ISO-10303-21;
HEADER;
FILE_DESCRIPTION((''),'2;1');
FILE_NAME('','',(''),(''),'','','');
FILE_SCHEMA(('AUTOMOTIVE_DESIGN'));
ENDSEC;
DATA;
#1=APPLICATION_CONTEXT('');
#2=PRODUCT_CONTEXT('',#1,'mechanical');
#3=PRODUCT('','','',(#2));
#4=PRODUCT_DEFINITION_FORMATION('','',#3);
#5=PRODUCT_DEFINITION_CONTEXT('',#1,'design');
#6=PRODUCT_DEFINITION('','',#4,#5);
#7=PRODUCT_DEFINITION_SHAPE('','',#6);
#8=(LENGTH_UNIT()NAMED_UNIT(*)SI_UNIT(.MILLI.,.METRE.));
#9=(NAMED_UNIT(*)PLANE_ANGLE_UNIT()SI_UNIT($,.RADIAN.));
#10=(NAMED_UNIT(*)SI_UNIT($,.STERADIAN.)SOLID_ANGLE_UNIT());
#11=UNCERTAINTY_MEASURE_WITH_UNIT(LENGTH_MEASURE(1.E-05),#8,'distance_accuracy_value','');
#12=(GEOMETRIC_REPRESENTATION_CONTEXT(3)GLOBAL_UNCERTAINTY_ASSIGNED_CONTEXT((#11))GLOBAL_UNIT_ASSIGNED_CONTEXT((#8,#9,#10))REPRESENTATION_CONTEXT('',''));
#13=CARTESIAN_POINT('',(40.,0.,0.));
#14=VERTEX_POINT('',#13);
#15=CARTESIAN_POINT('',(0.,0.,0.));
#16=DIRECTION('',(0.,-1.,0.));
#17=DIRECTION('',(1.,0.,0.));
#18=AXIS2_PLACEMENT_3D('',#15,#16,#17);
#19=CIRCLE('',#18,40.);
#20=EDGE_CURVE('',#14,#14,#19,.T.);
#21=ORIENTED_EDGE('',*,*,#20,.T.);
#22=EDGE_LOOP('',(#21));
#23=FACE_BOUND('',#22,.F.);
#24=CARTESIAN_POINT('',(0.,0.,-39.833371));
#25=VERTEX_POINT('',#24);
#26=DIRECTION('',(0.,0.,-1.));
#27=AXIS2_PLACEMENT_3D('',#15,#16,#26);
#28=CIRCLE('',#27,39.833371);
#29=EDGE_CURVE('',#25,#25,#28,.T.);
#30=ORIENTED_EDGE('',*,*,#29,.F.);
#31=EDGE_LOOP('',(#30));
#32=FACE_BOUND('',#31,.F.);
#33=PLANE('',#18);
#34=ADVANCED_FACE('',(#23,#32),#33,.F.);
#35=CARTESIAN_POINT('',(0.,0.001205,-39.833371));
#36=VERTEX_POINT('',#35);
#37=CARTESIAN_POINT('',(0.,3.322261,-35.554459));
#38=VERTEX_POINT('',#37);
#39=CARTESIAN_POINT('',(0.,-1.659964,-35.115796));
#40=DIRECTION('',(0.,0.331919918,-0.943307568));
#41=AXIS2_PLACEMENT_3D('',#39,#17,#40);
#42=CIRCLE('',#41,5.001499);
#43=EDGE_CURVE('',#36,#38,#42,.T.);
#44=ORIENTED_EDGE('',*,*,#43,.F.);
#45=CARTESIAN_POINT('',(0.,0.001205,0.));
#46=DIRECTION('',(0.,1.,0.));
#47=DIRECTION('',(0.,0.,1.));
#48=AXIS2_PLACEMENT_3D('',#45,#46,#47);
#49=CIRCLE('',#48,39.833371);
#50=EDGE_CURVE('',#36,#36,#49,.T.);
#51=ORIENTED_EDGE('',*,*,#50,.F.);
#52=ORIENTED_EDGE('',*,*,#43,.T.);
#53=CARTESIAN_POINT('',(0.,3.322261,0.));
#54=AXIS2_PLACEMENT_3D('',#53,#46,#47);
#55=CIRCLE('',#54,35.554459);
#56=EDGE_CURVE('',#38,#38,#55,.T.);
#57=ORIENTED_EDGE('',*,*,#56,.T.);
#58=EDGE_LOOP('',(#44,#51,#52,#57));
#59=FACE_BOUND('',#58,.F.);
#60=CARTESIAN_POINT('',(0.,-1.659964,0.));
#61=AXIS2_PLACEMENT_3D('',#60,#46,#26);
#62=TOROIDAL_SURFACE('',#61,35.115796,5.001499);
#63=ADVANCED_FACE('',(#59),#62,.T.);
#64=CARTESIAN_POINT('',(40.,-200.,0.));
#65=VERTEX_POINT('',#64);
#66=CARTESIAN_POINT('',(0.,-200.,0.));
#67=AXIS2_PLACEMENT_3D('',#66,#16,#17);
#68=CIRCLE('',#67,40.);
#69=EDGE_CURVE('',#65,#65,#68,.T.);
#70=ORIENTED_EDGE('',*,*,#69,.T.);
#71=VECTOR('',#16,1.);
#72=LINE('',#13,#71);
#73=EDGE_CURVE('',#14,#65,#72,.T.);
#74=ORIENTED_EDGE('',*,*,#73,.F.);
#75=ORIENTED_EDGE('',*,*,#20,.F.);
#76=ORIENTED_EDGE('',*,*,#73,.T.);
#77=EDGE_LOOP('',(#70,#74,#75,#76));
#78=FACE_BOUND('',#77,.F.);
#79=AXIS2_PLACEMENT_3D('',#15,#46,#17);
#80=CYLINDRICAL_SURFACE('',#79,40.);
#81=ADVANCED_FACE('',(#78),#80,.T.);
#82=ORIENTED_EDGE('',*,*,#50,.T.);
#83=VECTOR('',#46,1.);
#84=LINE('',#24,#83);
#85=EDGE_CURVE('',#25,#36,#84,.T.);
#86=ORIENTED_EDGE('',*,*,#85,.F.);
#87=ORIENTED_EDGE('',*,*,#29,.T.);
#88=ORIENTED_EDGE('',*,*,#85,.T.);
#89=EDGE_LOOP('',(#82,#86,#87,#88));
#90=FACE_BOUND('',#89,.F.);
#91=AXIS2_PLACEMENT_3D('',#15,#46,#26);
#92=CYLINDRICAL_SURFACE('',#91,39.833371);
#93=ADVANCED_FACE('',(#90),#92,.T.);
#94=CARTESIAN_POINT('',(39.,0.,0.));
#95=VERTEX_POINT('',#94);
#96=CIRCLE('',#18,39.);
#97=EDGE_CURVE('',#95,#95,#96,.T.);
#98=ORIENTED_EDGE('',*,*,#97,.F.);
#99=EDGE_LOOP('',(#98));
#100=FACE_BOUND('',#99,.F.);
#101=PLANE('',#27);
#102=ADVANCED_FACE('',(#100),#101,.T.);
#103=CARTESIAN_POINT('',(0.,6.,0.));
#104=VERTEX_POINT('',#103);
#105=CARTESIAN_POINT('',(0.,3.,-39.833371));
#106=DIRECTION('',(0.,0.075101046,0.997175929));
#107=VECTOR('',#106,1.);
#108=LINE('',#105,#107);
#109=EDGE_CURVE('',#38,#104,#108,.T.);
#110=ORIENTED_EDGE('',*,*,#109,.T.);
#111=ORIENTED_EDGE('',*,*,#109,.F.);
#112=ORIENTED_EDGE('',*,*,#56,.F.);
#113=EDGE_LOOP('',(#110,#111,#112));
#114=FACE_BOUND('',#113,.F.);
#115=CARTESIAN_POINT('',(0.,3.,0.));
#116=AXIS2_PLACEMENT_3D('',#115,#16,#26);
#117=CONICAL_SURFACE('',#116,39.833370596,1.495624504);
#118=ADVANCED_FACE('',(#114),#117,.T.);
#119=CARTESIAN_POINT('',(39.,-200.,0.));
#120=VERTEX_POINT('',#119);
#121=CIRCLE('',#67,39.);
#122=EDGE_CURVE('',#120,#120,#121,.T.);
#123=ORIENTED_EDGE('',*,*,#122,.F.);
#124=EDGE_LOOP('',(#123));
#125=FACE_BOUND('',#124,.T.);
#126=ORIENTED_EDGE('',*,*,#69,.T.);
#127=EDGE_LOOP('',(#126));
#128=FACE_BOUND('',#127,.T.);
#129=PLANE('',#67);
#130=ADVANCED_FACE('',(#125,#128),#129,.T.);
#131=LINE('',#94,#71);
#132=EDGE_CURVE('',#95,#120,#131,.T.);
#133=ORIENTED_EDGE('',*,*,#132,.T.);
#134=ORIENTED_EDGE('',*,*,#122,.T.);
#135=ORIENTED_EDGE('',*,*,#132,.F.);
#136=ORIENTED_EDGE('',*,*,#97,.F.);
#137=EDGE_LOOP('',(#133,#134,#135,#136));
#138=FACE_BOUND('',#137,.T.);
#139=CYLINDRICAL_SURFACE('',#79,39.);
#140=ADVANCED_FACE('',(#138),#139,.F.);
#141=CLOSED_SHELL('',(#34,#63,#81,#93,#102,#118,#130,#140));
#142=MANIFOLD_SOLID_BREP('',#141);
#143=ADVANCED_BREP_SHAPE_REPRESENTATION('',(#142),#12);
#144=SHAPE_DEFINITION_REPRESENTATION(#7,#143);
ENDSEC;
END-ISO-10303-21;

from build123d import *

# Parameters (mm, degrees)
F0_R     = 40
F0_R_2   = 39
F1_DEPTH = 200


# Not quite as in the source:
# - a fillet or chamfer that OpenCascade refuses, or shapes differently, is made with other operations: its cross-section is extruded or revolved along the edge and cut away or added


with BuildPart() as f1:
    # F0 (on Front) → F1 (new body)
    with BuildSketch(Plane.XZ):
        Circle(F0_R)
        Circle(F0_R_2, mode=Mode.SUBTRACT)
    extrude(amount=F1_DEPTH)

    # F2 (on Right) → F3 (revolve)
    with BuildSketch(Plane.YZ):
        Polygon((0, 0), (0, -39.8333705962), (3, -39.8333705962), (6, 0), align=None)
    revolve(axis=Axis((0, 3, 0), (0, -1, 0)))

    # F4: fillet of radius 5 on 1 edges, made by hand

    # F4_s1 → F4_t2 (revolve, cut)
    with BuildSketch(Plane.YZ):
        with BuildLine():
            ThreePointArc((0.000132768, -39.8337479192), (2.3100716804, -38.1578030018), (3.3274101289, -35.4914137529))
            Line((3.3274101289, -35.4914137529), (3.8261475828, -35.5289755344))
            ThreePointArc((3.8261475828, -35.5289755344), (3.6622430832, -37.6999389358), (3.4987374539, -39.8709323776))
            Line((3.4987374539, -39.8709323776), (3, -40.3335205091))
            ThreePointArc((3, -40.3335205091), (1.500066384, -40.3335205091), (0.1661424858, -40.3055431173))
            Line((0.1661424858, -40.3055431173), (0.000132768, -39.8337479192))
        make_face()
    revolve(axis=Axis((0, 3, 0), (0, -1, 0)), mode=Mode.SUBTRACT)


solid = f1.part
